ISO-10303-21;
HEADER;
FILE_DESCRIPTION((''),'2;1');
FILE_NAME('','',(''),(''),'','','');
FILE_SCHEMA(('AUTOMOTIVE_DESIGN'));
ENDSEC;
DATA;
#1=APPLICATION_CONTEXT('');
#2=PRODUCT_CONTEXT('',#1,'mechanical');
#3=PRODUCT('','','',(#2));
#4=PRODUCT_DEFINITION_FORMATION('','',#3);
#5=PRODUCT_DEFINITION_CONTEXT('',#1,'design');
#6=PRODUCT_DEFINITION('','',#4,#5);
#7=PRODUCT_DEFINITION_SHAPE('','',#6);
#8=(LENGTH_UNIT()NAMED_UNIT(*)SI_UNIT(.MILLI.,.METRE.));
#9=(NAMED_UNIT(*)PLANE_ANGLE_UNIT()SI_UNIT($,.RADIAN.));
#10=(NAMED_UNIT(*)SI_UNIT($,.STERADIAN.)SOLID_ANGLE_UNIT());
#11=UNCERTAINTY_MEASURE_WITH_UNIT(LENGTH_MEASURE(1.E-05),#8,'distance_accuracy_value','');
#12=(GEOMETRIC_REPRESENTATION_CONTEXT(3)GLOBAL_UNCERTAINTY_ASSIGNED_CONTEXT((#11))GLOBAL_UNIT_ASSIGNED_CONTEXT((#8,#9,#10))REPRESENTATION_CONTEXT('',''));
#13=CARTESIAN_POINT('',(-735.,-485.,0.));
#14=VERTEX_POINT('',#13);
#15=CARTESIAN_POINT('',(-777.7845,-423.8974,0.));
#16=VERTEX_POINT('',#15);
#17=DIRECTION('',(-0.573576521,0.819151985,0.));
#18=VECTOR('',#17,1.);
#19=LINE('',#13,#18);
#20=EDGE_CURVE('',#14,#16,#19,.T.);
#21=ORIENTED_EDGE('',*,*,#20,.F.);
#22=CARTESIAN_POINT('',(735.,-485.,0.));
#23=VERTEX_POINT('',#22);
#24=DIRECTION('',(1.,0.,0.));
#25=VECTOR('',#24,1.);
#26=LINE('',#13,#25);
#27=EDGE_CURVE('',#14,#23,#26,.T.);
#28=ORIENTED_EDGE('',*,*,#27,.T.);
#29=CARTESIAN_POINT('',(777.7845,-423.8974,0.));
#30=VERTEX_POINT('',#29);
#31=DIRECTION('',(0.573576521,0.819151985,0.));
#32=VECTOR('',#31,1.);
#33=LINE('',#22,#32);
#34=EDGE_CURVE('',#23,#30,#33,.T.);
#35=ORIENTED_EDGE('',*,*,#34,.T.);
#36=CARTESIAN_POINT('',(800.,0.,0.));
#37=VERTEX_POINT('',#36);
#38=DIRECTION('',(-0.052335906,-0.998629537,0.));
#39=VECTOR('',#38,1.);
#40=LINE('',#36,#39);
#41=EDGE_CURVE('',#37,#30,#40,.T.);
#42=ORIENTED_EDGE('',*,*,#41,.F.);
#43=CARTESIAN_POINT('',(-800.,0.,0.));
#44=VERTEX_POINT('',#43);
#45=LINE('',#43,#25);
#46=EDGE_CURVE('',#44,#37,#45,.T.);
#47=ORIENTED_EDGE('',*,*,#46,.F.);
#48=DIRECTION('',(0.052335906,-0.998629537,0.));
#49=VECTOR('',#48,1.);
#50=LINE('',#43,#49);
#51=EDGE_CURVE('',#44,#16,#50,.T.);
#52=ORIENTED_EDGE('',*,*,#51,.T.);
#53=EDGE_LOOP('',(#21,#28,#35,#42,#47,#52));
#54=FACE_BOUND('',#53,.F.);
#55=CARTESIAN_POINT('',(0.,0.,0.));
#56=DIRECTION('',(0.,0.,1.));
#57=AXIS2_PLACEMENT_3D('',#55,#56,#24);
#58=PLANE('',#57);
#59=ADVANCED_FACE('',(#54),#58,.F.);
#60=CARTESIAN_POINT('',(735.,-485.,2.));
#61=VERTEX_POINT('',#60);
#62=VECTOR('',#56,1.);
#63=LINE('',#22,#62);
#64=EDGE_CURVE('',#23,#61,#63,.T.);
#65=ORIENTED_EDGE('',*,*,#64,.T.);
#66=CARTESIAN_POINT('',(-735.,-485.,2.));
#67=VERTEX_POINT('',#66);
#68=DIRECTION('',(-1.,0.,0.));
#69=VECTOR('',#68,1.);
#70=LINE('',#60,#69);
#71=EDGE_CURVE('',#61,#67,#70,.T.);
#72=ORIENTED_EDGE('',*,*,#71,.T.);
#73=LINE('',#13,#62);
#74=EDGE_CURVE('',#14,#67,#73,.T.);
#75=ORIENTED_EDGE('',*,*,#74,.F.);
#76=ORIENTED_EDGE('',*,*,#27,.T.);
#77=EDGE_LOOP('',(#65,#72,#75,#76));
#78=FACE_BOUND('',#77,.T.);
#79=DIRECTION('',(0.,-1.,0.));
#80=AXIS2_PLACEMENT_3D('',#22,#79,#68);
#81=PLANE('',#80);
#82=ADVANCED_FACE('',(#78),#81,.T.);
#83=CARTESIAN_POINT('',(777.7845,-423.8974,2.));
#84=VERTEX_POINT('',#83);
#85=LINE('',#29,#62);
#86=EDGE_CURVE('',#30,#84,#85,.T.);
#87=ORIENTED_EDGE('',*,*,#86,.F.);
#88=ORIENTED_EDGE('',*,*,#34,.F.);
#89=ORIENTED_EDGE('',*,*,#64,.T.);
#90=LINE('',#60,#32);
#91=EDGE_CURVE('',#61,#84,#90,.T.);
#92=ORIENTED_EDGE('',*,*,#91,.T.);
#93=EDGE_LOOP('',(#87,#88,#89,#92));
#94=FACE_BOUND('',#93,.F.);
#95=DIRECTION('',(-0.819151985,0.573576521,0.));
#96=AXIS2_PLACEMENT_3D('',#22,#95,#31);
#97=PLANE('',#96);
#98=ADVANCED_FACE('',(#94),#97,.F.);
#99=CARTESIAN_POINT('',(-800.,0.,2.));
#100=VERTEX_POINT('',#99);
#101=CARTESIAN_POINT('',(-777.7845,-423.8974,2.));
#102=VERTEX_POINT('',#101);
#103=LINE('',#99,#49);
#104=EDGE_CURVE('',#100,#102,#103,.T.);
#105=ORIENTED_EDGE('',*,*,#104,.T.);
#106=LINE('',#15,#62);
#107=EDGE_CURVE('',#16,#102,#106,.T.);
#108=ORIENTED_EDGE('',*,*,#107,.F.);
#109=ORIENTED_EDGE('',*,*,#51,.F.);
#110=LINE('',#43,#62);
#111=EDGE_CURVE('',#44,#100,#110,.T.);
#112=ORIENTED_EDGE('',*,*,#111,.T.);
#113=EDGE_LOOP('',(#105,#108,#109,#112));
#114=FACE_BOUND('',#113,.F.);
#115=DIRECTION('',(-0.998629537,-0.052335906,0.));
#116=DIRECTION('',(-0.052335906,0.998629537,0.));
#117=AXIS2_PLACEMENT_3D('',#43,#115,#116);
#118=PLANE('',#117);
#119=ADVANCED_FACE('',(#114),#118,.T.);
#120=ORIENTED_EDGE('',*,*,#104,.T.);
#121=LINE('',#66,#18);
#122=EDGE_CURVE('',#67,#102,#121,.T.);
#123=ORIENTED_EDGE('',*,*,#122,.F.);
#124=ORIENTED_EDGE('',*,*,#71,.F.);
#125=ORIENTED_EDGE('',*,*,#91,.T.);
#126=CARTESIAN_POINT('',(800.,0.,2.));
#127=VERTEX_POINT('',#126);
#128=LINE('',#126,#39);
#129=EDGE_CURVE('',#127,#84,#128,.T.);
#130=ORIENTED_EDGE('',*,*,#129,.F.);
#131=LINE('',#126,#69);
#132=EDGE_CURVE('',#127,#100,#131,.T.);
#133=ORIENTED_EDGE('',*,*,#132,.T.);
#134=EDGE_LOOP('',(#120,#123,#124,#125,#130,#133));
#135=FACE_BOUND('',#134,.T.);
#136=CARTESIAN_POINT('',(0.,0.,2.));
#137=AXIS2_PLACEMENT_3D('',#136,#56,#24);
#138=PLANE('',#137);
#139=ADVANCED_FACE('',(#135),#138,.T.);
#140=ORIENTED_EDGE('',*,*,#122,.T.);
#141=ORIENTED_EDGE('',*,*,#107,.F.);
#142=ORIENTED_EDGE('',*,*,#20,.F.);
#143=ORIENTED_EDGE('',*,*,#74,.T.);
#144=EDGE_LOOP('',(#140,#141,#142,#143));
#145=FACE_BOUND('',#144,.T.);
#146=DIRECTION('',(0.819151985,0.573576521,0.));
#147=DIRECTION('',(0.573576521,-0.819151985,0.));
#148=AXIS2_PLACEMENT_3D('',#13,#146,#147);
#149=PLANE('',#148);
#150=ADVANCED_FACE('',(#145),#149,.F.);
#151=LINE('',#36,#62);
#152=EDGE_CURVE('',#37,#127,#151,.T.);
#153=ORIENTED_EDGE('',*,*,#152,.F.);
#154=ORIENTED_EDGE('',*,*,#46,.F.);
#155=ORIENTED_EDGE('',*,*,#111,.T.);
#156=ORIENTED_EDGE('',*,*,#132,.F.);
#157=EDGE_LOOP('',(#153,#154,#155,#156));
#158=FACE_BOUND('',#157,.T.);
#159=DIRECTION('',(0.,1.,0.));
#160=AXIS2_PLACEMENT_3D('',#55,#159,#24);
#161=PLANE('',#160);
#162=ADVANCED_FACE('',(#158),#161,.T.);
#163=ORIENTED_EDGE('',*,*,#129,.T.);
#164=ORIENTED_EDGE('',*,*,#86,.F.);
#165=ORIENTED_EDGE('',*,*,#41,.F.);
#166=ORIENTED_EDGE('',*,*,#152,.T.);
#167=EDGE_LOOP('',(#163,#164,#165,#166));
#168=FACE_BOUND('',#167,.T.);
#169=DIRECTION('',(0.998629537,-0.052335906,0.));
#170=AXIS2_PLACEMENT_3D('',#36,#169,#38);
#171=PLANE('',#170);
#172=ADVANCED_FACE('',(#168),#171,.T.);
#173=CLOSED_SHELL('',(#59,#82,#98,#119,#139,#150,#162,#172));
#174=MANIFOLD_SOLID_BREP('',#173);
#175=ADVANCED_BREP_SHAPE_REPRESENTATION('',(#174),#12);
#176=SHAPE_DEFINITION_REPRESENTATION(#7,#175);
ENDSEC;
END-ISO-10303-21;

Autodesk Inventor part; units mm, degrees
ref_plane "YZ Plane" through (0, 0, 0) normal (1, 0, 0) x (0, 1, 0)
ref_plane "XZ Plane" through (0, 0, 0) normal (0, 1, 0) x (-1, 0, 0)
ref_plane "XY Plane" through (0, 0, 0) normal (0, 0, 1) x (1, 0, 0)
sketch "Sketch1" plane through (0, 0, 0) normal (0, 0, 1) x (1, 0, 0)
  line L0 (800, 0) -> (800, -485) construction
  line L1 (800, -485) -> (0, -485)
  line L2 (800, 0) -> (777.7845, -423.8974)
  line L3 (735, -485) -> (800, -392.1704)
  line L4 (0, -485) -> (0, 0)
  line L5 (0, 0) -> (800, 0)
  dimension "d9" = 800
  dimension "d10" = 35
  dimension "d11" = 485
  dimension "d12" = 3
  dimension "d13" = 65
extrude "Plate1" add sketch "Sketch1" along normal blind 2
mirror "Mirror1" about plane through (0, 0, 0) normal (1, 0, 0)
sketch "Sketch2" plane through (0, 0, 2) normal (0, 0, 1) x (1, 0, 0)
  line L0 (-55, -435) -> (-55, -423) construction
  line L1 (-55, -423) -> (55, -423) construction
  line L2 (55, -423) -> (55, -435) construction
  line L3 (55, -435) -> (-55, -435) construction
  line L4 (-735, -485) -> (735, -485) projected
  point P0 (0, 0)
  point P1 (0, -435)
  point P2 (0, -485)
  dimension "d6" = 12
  dimension "d7" = 110
  dimension "d8" = 50
mark "Mark1"
equation "\"d2\" = Thickness"
equation "\"BendReliefWidth\" = Thickness"
equation "\"BendReliefDepth\" = 0.5 * Thickness"
equation "\"CornerReliefSize\" = 4 * Thickness"
equation "\"MinimumRemnant\" = 2 * Thickness"
equation "\"TransitionRadius\" = BendRadius"
equation "\"JacobiRadiusSize\" = BendRadius"
equation "\"GapSize\" = Thickness"
equation "\"Thickness\" = 2"
equation "\"BendRadius\" = 2.75"
properties part number "MSC 703 FACE 3" material "AISI304"
